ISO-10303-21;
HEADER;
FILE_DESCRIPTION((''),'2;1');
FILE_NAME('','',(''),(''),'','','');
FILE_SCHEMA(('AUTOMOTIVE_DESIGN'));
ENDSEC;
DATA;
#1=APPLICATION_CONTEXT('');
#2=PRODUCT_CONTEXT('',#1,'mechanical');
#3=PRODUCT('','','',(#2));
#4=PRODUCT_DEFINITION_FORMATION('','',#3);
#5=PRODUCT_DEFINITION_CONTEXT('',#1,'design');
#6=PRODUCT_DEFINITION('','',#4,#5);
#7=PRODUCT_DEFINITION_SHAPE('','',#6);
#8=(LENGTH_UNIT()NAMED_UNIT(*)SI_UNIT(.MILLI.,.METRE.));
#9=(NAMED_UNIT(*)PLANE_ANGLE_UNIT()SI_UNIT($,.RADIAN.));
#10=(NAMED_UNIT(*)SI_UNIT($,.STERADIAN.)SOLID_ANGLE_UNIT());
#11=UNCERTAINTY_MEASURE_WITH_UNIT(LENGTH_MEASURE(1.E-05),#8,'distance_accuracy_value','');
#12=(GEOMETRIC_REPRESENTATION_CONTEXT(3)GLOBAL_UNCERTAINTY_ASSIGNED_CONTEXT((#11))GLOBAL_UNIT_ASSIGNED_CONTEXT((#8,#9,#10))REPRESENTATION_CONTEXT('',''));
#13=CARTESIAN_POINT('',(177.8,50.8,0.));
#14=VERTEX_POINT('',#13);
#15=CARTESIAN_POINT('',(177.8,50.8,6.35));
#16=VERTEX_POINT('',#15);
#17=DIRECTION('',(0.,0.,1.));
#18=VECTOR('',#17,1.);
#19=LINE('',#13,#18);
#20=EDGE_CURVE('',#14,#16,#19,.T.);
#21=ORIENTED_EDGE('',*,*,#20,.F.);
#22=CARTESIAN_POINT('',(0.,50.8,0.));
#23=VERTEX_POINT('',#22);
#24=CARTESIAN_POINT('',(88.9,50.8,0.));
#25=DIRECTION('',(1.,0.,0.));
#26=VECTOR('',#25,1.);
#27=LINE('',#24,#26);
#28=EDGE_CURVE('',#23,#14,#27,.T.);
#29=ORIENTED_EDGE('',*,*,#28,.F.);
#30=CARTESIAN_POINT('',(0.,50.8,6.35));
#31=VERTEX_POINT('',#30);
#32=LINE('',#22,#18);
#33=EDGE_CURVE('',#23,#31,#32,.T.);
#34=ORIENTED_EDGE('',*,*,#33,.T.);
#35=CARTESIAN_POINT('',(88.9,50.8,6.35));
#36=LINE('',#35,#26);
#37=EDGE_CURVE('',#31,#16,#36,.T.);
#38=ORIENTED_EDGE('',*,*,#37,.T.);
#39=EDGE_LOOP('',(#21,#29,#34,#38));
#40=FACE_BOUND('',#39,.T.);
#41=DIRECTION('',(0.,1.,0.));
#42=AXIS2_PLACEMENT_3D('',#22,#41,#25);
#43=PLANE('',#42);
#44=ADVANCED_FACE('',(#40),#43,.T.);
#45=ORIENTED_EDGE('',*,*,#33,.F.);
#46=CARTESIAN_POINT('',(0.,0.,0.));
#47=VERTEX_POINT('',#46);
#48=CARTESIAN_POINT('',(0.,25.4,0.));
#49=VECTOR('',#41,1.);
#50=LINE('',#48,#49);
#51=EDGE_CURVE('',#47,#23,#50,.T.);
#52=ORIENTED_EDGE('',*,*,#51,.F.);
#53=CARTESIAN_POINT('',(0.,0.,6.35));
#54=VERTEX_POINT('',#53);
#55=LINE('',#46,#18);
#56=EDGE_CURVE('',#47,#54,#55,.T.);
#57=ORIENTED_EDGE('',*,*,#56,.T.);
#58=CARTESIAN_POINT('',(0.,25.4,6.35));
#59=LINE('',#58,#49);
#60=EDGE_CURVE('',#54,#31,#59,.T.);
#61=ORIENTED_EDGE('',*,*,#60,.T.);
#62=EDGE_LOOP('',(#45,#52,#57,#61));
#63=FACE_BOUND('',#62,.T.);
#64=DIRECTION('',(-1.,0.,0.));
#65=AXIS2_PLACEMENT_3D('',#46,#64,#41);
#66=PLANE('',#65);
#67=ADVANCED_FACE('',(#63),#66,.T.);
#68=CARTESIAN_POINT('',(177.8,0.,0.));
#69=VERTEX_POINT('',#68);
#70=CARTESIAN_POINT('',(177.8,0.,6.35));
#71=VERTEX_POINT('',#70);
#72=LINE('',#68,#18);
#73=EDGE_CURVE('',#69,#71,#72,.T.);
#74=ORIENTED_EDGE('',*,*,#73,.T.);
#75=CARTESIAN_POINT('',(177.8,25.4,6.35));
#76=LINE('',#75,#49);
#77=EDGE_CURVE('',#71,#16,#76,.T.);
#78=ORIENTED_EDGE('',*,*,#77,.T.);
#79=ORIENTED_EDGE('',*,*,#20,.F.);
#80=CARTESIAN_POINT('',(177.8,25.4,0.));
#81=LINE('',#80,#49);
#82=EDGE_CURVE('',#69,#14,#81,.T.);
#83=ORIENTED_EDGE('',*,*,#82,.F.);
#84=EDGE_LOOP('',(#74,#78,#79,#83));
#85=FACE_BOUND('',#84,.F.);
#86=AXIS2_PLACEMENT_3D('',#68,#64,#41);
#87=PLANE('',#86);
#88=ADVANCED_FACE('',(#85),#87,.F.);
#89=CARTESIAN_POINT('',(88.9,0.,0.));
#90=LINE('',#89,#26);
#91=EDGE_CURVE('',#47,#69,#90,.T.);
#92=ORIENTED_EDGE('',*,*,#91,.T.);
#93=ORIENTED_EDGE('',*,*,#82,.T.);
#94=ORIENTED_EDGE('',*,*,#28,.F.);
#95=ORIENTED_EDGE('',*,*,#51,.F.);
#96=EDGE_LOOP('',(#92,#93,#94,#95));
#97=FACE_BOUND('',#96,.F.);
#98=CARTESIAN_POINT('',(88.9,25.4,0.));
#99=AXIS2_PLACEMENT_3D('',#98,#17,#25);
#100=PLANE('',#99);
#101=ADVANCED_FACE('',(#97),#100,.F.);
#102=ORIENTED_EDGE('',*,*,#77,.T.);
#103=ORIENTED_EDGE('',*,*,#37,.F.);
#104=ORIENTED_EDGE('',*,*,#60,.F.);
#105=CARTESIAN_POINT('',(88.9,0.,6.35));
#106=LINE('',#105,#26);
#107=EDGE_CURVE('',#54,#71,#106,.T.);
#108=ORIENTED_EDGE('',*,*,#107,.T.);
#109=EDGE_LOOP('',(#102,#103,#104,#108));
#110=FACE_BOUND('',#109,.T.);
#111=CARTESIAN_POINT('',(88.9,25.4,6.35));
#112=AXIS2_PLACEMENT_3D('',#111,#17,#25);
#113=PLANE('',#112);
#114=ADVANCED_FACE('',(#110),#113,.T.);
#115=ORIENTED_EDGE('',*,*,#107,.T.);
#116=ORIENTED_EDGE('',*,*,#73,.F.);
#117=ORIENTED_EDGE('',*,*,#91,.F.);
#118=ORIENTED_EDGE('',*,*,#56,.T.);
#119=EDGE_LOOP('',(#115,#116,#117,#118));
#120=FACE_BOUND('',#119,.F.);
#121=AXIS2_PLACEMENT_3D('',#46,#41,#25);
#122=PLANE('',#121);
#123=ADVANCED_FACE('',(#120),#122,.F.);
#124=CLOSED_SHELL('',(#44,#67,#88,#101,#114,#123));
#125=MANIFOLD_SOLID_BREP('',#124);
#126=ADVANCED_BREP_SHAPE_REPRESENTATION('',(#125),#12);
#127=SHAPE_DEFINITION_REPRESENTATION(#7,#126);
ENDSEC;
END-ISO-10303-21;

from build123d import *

# Parameters (mm, degrees)
F1_W     = 177.8
F1_H     = 50.8
F2_DEPTH = 6.35


# Not quite as in the source:
# - a variable given as a bare number and used for a length is read in inches; the dataset says mm whatever the document's units were


with BuildPart() as f2:
    # F1 (on Top) → F2 (new body)
    with BuildSketch(Plane.XY):
        with Locations((88.9, 25.4)):
            Rectangle(F1_W, F1_H)
    extrude(amount=F2_DEPTH)


solid = f2.part
